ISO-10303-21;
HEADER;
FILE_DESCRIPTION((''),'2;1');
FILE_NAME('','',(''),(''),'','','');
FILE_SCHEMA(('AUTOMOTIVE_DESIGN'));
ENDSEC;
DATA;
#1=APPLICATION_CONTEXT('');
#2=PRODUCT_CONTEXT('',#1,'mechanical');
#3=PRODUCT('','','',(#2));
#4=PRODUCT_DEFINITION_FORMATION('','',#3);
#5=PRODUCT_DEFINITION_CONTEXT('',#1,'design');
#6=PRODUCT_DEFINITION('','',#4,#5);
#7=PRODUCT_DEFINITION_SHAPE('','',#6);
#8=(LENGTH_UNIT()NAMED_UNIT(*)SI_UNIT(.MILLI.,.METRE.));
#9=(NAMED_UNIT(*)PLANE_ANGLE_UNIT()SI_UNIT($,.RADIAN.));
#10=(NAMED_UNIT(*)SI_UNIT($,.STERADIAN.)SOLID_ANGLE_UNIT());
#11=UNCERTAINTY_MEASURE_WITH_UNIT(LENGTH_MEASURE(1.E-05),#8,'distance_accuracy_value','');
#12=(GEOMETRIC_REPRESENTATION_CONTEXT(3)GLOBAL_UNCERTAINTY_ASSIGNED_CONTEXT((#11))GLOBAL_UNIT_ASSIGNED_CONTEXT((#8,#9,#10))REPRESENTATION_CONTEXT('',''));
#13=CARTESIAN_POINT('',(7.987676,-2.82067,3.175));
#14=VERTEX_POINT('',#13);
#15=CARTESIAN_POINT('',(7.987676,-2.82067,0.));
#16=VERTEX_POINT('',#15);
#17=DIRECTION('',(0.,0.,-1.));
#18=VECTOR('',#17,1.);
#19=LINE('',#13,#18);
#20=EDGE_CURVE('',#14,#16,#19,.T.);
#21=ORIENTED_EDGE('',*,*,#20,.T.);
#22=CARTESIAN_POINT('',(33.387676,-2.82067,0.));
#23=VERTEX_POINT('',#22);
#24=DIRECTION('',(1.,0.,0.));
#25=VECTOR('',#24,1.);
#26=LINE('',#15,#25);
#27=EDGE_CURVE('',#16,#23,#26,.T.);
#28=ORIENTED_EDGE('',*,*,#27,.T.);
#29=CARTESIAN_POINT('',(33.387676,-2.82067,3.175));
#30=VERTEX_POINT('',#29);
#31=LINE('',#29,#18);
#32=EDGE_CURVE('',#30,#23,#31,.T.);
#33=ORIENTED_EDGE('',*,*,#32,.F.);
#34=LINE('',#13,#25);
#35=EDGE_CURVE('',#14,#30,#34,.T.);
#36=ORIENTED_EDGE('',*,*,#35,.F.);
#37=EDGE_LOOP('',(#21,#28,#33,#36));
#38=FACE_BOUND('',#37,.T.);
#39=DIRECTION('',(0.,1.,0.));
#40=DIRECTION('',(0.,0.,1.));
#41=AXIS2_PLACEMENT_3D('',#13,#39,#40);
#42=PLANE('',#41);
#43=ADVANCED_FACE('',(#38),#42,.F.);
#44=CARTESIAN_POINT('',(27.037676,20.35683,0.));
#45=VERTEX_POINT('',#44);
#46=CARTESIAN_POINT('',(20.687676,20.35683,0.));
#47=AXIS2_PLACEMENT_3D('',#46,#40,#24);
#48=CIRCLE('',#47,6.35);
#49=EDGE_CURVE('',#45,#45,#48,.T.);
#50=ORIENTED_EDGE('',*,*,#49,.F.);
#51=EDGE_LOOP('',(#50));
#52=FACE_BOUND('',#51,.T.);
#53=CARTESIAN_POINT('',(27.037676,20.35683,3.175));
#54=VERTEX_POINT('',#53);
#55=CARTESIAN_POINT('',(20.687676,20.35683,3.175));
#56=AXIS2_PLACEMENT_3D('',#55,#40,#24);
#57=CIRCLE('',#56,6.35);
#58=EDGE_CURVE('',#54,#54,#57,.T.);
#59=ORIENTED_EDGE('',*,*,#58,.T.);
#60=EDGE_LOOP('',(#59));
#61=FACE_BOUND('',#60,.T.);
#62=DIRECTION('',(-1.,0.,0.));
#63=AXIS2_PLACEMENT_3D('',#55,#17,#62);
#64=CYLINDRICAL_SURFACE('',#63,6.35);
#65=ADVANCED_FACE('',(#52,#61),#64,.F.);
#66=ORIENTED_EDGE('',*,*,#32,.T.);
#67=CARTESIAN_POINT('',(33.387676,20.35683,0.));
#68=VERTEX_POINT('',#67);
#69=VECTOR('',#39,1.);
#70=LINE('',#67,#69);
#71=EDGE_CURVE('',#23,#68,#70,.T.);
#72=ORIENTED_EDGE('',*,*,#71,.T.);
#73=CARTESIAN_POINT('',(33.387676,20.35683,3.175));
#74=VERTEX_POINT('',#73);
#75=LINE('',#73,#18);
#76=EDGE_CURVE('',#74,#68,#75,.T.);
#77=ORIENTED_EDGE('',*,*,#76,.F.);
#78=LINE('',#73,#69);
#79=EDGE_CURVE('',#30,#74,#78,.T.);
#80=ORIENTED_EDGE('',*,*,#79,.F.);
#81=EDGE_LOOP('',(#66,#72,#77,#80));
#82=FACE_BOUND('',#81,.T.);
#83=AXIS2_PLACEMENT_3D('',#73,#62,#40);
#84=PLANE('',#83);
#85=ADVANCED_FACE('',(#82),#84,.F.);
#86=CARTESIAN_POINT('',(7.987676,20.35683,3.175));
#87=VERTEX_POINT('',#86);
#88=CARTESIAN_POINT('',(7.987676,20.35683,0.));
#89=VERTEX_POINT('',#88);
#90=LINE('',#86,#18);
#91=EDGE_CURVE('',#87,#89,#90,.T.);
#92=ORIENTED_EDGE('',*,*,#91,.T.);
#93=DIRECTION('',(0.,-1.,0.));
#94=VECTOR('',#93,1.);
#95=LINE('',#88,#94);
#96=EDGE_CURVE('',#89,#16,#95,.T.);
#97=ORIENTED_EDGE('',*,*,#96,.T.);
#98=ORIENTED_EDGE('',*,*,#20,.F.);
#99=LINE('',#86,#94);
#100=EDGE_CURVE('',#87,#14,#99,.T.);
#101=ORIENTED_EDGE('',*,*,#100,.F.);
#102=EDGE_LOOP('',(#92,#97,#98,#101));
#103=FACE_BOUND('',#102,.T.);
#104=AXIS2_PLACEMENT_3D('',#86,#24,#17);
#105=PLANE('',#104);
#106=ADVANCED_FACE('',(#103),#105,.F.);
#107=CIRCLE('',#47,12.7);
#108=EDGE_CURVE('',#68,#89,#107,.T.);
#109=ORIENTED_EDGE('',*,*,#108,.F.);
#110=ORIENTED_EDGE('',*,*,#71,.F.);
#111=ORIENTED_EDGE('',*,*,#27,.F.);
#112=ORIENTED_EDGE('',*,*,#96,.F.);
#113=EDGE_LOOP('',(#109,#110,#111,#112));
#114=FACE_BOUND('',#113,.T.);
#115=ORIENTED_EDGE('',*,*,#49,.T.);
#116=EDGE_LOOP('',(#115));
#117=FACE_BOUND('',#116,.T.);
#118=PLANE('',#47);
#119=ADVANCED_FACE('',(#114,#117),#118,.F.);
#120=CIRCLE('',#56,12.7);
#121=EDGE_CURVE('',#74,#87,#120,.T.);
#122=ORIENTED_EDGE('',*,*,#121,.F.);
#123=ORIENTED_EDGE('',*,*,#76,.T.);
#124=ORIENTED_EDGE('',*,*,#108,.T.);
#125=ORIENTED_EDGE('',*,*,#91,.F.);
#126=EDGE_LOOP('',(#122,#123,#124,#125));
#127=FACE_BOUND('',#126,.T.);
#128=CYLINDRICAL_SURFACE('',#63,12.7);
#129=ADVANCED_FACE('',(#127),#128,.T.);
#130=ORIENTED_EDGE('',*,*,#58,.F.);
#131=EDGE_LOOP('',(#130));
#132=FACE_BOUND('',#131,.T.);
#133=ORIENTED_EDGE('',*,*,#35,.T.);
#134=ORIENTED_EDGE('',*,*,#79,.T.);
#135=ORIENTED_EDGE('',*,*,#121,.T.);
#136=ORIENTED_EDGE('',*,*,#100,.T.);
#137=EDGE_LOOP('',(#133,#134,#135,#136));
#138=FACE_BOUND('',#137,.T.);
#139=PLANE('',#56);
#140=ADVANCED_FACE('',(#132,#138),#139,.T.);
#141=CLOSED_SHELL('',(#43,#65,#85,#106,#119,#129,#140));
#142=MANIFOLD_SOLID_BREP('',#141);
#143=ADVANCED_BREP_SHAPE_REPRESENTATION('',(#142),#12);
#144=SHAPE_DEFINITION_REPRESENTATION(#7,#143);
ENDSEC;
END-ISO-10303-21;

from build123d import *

# Parameters (mm, degrees)
SKETCH1_R           = 6.35
BOSS_EXTRUDE1_DEPTH = 3.175


with BuildPart() as part:
    # Sketch1 → Boss-Extrude1 (new body)
    with BuildSketch(Plane.XY):
        with BuildLine():
            Line((7.987675642, 20.35683), (7.987675642, -2.82067))
            Line((7.987675642, -2.82067), (33.387675642, -2.82067))
            Line((33.387675642, -2.82067), (33.387675642, 20.35683))
            ThreePointArc((33.387675642, 20.35683), (20.687675642, 33.05683), (7.987675642, 20.35683))
        make_face()
        with Locations((20.687675642, 20.35683)):
            Circle(SKETCH1_R, mode=Mode.SUBTRACT)
    extrude(amount=BOSS_EXTRUDE1_DEPTH)


solid = part.part
